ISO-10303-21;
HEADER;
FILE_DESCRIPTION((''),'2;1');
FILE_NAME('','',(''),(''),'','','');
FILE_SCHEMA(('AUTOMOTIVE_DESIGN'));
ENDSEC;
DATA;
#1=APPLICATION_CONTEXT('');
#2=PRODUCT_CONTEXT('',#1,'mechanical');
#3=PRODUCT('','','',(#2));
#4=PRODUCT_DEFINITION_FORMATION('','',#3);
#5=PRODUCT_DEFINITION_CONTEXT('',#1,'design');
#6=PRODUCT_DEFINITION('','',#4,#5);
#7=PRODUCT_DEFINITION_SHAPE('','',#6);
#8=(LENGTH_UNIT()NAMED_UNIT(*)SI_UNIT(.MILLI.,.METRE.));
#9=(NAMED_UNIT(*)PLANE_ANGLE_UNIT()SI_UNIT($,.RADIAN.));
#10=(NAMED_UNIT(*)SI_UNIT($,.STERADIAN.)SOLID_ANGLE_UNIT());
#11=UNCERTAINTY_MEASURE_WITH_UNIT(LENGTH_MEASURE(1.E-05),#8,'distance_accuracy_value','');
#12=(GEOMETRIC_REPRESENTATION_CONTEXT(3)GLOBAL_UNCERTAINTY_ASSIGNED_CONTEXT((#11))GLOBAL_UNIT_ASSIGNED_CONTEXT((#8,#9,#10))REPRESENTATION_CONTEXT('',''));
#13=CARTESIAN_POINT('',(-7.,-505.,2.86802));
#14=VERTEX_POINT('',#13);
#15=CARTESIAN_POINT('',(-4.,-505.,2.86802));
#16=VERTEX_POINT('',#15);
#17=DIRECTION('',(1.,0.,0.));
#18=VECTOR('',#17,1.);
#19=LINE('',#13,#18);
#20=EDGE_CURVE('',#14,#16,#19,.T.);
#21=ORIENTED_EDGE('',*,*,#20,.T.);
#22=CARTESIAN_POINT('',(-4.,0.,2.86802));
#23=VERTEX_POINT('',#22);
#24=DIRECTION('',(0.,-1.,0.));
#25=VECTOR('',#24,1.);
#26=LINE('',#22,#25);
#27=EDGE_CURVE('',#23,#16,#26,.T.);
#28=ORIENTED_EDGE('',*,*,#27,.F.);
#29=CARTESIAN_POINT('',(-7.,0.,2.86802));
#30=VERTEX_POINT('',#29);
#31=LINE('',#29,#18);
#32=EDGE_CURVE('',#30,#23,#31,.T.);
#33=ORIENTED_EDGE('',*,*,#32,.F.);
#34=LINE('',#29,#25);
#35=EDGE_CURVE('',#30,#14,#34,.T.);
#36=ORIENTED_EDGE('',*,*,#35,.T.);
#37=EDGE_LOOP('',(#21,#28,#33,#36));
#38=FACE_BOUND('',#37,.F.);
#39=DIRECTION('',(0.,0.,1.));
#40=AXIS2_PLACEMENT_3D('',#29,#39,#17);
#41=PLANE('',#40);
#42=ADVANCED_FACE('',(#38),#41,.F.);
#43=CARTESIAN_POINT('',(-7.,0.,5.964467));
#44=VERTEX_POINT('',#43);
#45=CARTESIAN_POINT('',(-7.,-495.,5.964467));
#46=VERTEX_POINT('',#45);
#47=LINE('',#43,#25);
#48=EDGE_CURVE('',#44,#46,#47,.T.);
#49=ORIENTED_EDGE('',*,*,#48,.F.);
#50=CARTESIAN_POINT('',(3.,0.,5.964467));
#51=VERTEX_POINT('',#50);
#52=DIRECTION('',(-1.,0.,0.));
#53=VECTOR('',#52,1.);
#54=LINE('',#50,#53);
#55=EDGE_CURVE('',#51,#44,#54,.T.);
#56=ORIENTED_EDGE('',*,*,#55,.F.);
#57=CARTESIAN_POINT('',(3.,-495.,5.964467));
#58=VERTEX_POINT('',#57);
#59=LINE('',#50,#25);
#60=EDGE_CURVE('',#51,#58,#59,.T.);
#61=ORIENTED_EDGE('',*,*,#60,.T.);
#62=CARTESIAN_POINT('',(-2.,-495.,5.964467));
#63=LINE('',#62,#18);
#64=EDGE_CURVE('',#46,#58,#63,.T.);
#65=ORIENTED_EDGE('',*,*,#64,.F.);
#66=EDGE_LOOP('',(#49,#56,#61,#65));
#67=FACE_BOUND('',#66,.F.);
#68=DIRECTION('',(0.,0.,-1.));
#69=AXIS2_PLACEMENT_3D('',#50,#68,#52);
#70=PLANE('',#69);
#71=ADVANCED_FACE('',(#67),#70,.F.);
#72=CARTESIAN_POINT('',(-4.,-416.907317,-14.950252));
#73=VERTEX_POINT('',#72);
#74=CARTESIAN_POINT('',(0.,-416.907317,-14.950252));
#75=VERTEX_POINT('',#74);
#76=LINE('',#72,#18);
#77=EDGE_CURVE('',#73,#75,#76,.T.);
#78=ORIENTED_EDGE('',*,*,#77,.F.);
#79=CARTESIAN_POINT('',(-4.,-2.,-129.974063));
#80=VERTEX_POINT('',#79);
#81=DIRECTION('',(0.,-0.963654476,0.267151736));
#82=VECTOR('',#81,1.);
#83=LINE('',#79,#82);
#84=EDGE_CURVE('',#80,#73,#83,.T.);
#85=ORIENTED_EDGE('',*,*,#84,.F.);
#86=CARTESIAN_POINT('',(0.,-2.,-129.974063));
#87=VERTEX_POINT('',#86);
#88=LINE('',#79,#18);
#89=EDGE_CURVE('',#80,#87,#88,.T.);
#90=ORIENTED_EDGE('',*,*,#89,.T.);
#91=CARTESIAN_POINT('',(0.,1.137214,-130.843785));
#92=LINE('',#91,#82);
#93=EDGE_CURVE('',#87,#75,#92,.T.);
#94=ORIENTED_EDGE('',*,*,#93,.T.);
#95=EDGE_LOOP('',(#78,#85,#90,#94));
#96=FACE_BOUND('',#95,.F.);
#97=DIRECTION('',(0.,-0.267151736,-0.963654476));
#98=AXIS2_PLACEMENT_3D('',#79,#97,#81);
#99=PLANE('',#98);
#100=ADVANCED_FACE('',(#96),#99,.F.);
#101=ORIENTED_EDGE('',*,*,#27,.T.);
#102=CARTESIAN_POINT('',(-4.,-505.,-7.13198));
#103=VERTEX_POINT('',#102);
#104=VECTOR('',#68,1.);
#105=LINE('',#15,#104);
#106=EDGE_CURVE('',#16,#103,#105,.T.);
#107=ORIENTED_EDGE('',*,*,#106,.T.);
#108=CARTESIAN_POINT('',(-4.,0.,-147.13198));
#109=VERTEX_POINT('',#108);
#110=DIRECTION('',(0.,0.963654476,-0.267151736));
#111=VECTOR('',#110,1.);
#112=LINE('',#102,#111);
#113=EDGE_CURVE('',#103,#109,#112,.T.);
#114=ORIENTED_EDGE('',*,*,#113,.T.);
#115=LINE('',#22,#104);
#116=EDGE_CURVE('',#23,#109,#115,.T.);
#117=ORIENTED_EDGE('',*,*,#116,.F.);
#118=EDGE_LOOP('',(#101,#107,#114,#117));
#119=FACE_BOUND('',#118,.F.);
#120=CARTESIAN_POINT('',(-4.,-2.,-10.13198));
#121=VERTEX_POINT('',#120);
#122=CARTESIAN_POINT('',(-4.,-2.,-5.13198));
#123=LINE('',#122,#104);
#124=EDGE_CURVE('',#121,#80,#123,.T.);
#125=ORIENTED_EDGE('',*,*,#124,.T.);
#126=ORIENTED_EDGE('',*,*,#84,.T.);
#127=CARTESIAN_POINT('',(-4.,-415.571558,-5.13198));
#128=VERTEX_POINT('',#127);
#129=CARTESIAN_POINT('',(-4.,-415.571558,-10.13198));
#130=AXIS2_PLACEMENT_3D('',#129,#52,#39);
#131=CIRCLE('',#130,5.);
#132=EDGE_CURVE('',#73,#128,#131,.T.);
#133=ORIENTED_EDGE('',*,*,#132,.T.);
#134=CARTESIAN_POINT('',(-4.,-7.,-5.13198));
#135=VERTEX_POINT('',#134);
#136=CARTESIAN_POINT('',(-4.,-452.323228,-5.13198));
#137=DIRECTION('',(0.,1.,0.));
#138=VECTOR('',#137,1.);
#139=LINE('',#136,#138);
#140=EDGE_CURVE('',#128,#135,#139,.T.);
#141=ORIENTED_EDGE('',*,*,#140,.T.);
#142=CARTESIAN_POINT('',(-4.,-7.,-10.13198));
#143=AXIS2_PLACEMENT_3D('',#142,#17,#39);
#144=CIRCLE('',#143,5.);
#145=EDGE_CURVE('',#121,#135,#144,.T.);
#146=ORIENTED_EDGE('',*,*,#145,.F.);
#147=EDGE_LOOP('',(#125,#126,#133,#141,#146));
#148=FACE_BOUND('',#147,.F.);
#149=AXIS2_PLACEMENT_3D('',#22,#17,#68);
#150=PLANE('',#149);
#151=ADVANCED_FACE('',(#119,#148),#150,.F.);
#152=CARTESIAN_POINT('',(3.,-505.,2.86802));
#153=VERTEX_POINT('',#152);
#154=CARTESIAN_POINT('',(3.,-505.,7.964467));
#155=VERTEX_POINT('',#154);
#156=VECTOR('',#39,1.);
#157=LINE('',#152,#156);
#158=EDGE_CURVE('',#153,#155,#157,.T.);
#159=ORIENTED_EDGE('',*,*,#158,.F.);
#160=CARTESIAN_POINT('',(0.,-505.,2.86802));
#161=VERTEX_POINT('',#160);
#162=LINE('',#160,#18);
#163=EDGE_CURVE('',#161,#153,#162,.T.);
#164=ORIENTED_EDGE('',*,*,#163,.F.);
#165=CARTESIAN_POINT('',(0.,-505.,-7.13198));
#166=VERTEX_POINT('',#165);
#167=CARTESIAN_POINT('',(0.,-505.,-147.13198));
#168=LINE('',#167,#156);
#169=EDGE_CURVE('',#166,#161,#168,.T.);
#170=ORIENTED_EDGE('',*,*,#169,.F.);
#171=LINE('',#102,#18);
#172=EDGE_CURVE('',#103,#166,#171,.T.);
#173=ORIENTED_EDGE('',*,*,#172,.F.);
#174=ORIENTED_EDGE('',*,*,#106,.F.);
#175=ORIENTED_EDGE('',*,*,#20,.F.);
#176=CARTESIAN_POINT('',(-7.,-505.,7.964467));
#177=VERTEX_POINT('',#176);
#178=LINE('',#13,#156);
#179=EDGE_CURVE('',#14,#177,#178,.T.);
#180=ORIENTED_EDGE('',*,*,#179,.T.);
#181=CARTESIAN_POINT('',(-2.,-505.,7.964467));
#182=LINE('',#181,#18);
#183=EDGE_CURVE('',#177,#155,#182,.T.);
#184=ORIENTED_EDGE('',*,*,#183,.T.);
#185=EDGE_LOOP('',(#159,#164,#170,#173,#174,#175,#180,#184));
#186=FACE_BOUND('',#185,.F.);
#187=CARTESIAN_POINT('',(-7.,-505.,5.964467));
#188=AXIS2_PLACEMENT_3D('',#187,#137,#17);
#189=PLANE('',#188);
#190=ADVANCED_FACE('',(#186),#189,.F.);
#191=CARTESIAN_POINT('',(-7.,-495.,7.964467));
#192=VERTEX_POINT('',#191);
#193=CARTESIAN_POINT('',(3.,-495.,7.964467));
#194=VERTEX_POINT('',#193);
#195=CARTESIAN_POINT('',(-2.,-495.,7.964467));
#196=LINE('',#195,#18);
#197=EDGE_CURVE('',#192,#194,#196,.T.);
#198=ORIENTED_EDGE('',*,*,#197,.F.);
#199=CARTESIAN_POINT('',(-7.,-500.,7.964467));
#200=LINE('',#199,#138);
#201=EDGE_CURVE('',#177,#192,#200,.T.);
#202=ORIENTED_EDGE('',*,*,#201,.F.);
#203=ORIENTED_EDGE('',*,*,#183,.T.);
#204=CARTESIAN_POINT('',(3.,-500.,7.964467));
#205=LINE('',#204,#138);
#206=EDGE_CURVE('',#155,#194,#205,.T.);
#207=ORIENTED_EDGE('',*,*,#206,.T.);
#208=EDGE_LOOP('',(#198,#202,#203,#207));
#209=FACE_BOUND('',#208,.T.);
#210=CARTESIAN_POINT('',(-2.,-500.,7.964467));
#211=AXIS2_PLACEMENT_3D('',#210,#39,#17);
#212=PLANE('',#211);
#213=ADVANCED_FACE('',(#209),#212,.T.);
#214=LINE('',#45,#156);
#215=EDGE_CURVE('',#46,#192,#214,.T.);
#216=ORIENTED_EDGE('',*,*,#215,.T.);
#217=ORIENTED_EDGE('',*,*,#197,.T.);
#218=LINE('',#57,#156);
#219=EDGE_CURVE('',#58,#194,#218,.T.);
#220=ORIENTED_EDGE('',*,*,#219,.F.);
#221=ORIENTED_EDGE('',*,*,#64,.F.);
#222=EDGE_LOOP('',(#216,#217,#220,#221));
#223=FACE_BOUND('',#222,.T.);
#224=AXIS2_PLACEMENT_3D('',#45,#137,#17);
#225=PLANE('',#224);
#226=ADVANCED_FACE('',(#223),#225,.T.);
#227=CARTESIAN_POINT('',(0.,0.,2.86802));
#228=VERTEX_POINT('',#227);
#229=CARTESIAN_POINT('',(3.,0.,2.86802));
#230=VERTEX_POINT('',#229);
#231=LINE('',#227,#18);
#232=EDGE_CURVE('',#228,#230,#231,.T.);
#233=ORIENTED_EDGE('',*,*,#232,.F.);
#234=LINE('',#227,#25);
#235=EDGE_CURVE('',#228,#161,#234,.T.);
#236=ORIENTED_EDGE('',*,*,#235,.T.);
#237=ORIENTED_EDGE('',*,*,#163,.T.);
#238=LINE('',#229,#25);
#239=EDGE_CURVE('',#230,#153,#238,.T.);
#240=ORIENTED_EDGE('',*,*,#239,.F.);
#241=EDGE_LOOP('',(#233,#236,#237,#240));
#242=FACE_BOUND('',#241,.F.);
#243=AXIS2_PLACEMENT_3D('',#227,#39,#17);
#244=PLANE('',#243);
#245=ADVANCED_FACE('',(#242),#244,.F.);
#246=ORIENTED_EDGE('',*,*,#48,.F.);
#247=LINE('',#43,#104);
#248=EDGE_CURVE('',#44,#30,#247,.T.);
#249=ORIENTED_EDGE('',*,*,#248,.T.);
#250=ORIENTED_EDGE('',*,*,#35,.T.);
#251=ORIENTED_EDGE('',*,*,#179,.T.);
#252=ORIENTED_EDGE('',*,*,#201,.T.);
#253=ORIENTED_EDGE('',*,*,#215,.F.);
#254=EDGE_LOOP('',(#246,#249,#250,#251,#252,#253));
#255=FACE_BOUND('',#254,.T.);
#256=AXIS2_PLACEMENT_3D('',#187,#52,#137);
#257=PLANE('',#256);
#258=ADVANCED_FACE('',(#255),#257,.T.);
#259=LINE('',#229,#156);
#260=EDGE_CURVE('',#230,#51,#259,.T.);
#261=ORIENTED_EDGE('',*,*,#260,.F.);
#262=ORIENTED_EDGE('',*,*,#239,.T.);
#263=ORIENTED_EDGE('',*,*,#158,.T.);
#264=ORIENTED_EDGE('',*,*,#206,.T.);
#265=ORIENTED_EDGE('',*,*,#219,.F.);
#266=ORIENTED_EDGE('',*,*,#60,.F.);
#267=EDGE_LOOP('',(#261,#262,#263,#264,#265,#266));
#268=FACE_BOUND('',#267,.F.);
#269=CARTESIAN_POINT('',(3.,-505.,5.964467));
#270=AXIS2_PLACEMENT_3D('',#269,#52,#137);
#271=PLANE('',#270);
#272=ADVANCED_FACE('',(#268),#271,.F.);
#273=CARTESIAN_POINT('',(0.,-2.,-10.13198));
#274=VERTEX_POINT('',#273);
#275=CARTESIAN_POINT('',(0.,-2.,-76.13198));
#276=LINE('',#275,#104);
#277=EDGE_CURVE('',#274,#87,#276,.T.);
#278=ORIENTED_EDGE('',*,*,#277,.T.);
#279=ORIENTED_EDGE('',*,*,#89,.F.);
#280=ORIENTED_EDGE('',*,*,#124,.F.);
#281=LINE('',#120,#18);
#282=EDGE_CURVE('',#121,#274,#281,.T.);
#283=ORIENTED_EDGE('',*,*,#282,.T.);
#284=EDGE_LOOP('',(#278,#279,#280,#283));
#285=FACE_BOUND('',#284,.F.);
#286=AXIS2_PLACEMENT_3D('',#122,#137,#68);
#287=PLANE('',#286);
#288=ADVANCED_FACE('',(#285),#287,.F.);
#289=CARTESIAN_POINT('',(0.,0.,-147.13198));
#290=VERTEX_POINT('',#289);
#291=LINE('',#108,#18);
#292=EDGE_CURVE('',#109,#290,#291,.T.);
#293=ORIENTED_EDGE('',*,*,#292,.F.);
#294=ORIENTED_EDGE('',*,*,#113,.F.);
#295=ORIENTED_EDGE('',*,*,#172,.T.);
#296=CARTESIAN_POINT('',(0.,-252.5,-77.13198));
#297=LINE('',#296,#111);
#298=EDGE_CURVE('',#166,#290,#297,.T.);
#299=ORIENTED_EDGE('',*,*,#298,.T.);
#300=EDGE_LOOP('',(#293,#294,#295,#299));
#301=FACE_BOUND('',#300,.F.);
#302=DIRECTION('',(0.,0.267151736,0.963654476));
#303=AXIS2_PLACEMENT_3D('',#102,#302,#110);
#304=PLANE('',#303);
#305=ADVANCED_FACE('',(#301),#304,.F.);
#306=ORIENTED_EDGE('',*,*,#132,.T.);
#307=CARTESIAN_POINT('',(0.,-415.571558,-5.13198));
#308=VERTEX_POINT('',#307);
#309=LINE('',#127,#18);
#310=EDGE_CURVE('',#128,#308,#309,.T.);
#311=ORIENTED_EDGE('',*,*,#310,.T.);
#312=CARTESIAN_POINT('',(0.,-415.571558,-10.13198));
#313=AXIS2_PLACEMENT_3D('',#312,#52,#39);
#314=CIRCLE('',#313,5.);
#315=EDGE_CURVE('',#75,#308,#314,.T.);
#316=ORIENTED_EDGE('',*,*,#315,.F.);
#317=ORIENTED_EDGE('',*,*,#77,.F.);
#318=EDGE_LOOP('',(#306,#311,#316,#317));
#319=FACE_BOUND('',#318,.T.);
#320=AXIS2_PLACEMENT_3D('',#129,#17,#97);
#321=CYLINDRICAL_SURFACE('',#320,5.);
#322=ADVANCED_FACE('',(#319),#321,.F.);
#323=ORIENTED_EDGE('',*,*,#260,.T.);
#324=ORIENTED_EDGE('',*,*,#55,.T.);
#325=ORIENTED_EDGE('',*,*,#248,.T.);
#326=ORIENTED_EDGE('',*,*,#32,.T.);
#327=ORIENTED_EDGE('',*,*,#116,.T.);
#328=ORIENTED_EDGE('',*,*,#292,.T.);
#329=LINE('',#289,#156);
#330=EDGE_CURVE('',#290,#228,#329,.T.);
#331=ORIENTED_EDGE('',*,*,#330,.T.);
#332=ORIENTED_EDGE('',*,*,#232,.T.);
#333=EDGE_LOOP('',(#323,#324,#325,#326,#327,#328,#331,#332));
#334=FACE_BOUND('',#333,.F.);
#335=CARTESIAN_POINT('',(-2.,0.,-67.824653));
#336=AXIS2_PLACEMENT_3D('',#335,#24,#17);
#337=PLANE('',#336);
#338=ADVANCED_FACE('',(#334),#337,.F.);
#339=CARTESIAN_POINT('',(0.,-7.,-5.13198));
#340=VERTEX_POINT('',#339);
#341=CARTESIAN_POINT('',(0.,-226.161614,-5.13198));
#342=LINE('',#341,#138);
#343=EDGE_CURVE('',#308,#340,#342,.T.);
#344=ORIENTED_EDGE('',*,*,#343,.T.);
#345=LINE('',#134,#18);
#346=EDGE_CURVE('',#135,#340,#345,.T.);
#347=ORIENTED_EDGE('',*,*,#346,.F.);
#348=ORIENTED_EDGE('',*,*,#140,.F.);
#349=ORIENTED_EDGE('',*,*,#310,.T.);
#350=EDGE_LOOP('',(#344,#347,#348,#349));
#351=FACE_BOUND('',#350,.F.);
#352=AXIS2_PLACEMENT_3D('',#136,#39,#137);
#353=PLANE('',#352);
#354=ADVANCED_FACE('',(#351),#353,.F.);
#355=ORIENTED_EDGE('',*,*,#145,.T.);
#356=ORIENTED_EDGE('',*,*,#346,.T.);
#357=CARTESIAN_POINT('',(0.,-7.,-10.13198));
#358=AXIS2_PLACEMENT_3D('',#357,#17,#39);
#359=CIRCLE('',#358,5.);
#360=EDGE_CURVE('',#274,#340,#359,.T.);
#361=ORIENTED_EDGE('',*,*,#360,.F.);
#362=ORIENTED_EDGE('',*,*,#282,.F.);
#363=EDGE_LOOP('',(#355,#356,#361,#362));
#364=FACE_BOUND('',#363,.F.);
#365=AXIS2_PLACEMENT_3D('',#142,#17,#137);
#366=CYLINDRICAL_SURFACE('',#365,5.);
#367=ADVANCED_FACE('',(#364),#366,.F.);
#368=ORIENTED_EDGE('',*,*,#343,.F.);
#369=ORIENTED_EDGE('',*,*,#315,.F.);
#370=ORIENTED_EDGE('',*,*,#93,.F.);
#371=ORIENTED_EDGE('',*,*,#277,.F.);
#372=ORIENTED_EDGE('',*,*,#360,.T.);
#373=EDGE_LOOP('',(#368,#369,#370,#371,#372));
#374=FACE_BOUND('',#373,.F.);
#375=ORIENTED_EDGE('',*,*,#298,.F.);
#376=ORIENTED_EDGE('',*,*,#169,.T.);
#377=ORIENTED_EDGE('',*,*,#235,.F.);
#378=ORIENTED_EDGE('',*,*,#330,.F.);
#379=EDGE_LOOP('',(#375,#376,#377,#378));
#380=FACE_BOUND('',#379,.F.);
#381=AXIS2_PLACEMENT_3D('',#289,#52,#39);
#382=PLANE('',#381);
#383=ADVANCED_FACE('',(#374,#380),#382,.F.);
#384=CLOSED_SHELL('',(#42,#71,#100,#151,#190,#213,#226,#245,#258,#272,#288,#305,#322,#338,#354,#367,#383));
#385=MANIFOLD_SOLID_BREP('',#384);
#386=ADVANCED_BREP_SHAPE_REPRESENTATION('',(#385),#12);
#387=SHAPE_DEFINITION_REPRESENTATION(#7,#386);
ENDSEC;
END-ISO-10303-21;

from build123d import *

# Parameters (mm, degrees)
F1_DEPTH = 505
F2_W     = 10
F2_H     = 10
F3_DEPTH = 2
F5_DEPTH = 25
F7_DEPTH = 25
F8_R     = 5


with BuildPart() as f1:
    # F0 (on Front) → F1 (new body)
    with BuildSketch(Plane.XZ):
        Polygon((3, 5.9644671453), (-7, 5.9644671453), (-7, 2.8680202551), (-4, 2.8680202551), (-4, -147.1319797449), (0, -147.1319797449), (0, 2.8680202551), (3, 2.8680202551), align=None)
    extrude(amount=F1_DEPTH)

    # F2 (on face) → F3 (join)
    with BuildSketch(Plane.XY.offset(5.9644671453)):
        with Locations((-2, -500)):
            Rectangle(F2_W, F2_H)
    extrude(amount=F3_DEPTH)

    # F4 (on face) → F5 (cut)
    with BuildSketch(Plane(origin=(-4, 0, 0), x_dir=(0, -1, 0), z_dir=(-1, 0, 0))):
        Polygon((505, -147.1319797449), (505, -7.1319797449), (0, -147.1319797449), align=None)
    extrude(amount=-F5_DEPTH, mode=Mode.SUBTRACT)

    # F6 (on face) → F7 (cut)
    with BuildSketch(Plane(origin=(-4, 0, 0), x_dir=(0, -1, 0), z_dir=(-1, 0, 0))):
        Polygon((452.3232281555, -5.1319797449), (2, -5.1319797449), (2, -129.9740627979), align=None)
    extrude(amount=-F7_DEPTH, mode=Mode.SUBTRACT)

    # F8
    f8_edges = [f1.edges().sort_by_distance(p)[0] for p in [
        (-2, -2, -5.13198),
        (-2, -452.323228, -5.13198),
    ]]
    fillet(f8_edges, radius=F8_R)


solid = f1.part
